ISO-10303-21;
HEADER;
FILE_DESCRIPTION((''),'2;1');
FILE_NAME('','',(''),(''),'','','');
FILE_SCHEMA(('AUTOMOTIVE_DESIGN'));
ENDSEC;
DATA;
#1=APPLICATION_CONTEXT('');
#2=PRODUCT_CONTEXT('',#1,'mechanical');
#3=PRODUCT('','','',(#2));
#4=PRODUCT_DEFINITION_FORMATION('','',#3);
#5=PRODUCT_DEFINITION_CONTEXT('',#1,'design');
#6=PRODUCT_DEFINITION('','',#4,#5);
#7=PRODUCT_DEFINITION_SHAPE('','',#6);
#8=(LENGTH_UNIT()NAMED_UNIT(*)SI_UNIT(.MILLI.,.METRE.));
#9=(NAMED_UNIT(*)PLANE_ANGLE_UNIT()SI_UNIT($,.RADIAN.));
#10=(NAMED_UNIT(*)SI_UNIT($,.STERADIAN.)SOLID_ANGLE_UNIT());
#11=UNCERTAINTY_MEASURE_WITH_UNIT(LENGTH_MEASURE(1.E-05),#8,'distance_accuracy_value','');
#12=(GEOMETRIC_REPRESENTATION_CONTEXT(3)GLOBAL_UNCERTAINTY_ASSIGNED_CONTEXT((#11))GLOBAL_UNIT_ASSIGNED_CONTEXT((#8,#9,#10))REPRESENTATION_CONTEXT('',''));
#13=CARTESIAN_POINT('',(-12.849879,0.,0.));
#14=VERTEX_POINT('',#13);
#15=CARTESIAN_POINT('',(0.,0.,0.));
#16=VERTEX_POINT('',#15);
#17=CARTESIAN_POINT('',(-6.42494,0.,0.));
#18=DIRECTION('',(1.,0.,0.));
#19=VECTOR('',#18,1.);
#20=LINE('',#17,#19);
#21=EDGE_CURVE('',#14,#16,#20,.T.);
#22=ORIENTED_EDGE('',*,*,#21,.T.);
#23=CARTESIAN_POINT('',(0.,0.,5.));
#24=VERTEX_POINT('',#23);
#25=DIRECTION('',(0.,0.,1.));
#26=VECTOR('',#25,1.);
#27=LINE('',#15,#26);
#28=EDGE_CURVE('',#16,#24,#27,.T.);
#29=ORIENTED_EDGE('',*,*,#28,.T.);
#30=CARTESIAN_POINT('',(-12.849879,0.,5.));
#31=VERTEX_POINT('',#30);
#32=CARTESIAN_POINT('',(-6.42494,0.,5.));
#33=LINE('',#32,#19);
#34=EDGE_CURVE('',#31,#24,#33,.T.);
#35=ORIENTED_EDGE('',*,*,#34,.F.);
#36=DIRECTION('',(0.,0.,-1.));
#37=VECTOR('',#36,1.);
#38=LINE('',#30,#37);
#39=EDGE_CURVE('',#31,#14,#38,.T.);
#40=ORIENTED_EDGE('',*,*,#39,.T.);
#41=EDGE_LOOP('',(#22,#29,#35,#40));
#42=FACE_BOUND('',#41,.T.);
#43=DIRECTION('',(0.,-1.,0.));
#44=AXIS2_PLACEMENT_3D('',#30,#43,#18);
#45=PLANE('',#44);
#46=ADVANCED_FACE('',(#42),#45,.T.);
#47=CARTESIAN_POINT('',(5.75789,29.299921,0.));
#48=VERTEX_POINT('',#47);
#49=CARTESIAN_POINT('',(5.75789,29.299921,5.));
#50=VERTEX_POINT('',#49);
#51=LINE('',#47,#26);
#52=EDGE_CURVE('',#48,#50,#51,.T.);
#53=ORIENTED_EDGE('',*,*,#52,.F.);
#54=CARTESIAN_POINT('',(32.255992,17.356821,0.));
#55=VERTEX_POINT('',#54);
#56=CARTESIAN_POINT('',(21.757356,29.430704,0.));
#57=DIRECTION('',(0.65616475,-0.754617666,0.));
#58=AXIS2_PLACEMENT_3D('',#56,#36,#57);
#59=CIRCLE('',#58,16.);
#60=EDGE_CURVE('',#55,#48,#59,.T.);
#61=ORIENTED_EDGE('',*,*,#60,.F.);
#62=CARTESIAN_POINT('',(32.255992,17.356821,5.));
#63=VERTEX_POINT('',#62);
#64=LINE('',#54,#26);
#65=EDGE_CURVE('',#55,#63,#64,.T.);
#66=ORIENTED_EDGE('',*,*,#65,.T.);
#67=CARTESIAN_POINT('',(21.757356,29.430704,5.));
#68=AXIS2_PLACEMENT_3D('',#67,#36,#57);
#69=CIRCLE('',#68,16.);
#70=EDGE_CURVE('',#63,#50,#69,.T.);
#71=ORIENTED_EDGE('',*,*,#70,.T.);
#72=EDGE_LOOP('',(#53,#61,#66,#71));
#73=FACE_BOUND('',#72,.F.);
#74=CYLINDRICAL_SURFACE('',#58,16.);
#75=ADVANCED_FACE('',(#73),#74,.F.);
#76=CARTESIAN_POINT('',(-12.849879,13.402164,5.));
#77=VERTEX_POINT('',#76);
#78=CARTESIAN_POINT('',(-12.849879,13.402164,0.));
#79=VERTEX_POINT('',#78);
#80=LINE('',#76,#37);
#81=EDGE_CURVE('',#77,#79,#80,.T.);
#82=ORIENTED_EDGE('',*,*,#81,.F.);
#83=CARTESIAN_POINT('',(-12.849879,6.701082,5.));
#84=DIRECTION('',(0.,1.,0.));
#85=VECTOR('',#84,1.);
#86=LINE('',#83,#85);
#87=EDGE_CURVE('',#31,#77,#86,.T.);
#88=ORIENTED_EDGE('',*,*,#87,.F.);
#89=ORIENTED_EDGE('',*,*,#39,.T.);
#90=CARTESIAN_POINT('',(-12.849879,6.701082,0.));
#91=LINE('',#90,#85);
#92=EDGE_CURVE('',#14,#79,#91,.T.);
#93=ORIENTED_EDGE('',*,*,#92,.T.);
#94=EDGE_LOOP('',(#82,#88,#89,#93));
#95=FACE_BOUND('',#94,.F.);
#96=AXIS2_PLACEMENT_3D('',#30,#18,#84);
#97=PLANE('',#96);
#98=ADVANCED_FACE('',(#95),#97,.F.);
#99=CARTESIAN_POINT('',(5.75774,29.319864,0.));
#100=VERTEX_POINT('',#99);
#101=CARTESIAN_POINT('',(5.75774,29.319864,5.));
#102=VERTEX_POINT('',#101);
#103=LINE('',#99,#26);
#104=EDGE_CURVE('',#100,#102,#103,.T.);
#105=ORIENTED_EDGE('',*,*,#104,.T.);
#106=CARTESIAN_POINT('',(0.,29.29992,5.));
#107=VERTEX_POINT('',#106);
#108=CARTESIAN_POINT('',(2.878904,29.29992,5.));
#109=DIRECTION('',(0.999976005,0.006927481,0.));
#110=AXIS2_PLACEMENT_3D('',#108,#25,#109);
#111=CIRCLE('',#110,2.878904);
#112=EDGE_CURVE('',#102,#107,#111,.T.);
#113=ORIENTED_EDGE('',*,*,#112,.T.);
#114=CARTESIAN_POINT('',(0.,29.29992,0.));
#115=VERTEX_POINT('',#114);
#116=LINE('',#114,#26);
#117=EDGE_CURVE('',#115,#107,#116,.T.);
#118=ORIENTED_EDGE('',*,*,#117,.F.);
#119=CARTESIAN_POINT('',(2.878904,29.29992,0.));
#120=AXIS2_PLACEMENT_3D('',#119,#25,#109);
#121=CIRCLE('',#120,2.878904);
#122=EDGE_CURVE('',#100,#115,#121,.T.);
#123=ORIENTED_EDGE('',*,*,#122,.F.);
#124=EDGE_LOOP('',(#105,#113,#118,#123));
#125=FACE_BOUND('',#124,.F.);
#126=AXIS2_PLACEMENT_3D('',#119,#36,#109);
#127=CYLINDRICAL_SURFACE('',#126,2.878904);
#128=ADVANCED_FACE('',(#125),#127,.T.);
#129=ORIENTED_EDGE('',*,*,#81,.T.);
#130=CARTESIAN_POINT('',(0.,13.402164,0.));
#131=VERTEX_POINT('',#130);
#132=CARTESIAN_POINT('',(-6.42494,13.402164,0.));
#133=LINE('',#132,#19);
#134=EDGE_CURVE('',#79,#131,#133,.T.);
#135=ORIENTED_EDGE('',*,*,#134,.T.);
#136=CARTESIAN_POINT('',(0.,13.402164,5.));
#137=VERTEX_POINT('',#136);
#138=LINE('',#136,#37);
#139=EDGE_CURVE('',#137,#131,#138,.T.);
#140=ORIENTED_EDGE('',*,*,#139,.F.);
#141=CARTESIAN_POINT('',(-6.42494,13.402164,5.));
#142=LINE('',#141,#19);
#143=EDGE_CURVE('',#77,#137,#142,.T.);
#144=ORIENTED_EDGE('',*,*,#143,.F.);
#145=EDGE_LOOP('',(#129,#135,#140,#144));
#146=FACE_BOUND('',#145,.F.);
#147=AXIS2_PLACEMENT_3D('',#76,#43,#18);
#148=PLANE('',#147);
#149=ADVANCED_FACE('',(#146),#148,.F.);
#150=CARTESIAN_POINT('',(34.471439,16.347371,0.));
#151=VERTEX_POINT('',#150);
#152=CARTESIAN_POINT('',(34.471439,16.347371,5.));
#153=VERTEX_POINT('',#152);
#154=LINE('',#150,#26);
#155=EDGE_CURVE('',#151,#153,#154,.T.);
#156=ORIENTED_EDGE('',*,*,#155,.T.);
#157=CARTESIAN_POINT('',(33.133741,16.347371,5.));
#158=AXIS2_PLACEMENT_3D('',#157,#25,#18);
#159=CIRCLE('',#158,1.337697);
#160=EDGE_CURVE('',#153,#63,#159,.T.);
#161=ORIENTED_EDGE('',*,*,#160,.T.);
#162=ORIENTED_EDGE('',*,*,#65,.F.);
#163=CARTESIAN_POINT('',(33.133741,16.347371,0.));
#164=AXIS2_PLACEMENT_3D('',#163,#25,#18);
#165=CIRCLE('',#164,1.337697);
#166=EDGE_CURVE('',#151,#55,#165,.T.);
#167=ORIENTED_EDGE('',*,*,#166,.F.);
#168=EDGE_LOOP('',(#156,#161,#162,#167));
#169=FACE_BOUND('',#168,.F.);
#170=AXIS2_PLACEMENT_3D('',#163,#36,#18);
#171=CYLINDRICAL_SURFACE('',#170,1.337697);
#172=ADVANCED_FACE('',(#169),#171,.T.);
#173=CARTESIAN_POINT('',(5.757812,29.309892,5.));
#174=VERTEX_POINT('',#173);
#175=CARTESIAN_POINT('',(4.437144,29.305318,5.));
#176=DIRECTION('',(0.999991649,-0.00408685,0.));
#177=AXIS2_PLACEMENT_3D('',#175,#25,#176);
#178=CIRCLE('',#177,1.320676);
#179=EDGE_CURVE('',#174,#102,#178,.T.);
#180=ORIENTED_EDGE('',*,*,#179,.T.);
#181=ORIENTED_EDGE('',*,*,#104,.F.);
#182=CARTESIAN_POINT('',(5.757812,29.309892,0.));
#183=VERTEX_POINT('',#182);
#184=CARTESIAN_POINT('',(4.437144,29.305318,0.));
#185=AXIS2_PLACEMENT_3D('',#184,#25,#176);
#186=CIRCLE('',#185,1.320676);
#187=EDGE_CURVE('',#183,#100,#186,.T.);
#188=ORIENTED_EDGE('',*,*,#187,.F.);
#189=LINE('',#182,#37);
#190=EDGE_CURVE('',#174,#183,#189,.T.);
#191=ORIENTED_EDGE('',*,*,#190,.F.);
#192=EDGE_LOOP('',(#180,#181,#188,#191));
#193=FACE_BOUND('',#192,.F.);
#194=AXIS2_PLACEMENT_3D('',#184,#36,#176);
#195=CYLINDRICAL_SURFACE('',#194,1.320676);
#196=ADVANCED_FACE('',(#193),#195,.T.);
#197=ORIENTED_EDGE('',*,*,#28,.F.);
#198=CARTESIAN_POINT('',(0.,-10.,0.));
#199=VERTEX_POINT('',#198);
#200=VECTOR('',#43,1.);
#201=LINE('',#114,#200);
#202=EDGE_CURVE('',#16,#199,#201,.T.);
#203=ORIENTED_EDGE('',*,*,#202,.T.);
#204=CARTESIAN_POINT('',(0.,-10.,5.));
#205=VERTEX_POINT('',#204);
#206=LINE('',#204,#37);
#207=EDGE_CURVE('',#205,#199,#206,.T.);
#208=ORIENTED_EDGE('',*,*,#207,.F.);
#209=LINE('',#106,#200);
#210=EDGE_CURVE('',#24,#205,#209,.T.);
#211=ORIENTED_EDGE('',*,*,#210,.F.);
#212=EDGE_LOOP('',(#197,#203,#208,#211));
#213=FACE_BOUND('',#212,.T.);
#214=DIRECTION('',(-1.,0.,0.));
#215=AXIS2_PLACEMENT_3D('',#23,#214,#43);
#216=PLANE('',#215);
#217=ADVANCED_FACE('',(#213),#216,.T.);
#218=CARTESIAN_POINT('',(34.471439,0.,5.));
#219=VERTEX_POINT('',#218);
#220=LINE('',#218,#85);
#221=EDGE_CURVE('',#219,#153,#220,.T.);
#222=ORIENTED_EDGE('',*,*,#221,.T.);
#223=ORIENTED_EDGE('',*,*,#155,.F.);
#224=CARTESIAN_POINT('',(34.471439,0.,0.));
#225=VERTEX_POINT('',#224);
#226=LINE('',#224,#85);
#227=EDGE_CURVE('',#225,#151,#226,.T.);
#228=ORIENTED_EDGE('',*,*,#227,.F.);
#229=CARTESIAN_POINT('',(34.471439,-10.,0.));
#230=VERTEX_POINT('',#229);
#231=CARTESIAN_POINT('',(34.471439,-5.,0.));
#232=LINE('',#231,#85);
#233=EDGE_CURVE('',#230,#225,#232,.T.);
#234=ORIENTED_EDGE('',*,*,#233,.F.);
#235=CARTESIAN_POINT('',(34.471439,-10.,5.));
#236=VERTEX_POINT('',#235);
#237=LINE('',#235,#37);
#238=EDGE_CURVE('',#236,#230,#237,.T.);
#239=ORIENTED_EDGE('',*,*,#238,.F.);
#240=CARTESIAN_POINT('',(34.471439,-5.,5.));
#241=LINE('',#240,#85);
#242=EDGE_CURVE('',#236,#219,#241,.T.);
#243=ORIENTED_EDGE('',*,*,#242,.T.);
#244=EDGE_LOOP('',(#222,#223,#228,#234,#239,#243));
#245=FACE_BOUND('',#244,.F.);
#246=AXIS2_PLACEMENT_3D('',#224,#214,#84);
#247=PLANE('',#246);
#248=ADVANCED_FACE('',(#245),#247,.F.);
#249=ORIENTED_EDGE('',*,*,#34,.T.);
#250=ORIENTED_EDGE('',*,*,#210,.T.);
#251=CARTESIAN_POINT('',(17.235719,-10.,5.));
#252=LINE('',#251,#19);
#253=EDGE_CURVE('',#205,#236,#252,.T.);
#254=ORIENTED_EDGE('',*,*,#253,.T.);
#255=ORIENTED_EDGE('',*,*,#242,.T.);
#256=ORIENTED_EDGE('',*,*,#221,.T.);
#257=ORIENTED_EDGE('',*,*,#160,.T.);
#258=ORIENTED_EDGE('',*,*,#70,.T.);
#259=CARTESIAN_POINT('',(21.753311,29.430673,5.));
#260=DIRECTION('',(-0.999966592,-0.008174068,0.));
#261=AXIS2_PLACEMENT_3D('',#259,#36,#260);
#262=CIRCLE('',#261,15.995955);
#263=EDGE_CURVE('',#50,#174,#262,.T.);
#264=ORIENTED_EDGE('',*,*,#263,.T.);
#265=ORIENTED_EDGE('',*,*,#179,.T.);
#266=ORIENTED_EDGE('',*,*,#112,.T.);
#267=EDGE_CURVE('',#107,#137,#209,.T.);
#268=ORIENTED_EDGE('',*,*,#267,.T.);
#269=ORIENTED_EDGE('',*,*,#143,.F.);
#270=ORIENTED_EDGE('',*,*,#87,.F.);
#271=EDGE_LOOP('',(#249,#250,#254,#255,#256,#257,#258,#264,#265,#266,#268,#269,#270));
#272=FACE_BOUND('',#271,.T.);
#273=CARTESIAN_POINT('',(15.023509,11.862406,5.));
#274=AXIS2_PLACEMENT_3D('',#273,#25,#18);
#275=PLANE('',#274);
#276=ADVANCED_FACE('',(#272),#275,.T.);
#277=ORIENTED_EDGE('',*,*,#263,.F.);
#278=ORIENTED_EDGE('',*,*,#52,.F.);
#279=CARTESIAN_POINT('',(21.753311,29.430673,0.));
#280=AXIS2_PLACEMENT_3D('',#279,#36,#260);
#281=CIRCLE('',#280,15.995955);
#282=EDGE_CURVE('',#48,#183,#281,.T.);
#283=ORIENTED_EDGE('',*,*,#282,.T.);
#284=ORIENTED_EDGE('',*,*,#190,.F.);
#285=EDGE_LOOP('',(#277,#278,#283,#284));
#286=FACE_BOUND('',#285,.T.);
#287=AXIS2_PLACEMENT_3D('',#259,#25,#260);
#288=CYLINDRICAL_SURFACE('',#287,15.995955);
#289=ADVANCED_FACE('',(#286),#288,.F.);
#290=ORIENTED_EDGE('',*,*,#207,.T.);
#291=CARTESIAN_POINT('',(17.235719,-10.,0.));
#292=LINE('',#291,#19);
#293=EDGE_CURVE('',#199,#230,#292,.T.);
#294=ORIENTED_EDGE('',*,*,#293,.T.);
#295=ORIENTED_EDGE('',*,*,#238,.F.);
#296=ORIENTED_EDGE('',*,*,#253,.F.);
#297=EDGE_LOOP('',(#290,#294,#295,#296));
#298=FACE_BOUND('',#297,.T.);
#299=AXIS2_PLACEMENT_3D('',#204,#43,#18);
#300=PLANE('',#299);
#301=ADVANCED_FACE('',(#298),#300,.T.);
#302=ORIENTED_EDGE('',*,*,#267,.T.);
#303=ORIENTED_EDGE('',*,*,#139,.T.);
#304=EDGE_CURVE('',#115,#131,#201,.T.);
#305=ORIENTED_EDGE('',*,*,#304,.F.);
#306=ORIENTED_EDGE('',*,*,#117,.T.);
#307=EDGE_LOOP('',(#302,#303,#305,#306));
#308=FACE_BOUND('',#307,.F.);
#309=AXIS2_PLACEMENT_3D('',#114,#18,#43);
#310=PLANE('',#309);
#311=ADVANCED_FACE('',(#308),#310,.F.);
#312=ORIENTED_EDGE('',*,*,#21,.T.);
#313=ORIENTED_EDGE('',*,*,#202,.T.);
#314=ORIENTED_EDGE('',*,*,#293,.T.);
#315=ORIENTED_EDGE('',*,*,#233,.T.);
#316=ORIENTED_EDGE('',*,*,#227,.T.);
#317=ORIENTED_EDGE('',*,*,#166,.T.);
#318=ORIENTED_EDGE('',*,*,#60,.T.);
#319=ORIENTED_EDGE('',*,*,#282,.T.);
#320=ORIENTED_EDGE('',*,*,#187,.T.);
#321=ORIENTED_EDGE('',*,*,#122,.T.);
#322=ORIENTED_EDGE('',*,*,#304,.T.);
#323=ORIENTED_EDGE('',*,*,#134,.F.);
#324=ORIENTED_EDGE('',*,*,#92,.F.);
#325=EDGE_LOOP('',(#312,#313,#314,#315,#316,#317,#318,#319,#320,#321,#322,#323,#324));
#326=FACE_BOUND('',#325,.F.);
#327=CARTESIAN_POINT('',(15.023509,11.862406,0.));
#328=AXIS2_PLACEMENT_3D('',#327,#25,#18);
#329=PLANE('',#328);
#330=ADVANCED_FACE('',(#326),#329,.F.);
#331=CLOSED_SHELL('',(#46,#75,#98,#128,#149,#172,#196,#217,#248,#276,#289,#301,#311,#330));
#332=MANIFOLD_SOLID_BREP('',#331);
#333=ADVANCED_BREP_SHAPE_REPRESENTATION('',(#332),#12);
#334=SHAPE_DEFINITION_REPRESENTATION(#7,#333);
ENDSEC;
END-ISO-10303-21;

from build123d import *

# Parameters (mm, degrees)
F1_DEPTH = 5
F2_W     = 34.4714387385
F2_H     = 10
F2_W_2   = 12.8498794511
F2_H_2   = 13.4021639824
F3_DEPTH = 5


# Not quite as in the source:
# - ends of sketch curves that miss each other by under 0.0002 mm in the source are joined
# - a feature names something its author has since deleted; it is built from what else it names


with BuildPart() as f1:
    # F0 (on Top) → F1 (new body)
    with BuildSketch(Plane.XY):
        with BuildLine():
            Line((0, 29.2999204248), (0, 0))
            Line((0, 0), (34.4714387385, 0))
            Line((34.4714387385, 0), (34.4714387385, 16.3473710418))
            ThreePointArc((34.4714387385, 16.3473710418), (32.5790927131, 15.1300794804), (32.2559916738, 17.3568210333))
            ThreePointArc((32.2559916738, 17.3568210333), (15.182844974, 14.8438668457), (5.7578901922, 29.2999210911))
            ThreePointArc((5.7578901922, 29.2999210911), (2.8789043427, 26.4210160822), (0, 29.2999204248))
        make_face()
        with BuildLine():
            ThreePointArc((5.7577396052, 29.3198639813), (2.8689325046, 32.1788074974), (0, 29.2999204248))
            ThreePointArc((0, 29.2999204248), (2.8789043427, 26.4210160822), (5.7578086853, 29.2999204248))
            ThreePointArc((5.7578086853, 29.2999204248), (5.7578117914, 29.3098925127), (5.7577396052, 29.3198639813))
        make_face()
        with BuildLine():
            ThreePointArc((32.2559916738, 17.3568210333), (32.5790927131, 15.1300794804), (34.4714387385, 16.3473710418))
            ThreePointArc((34.4714387385, 16.3473710418), (33.6883902233, 17.5646626032), (32.2559916738, 17.3568210333))
        make_face()
    extrude(amount=F1_DEPTH)

    # F2 (on face) → F3 (join)
    with BuildSketch(Plane.XY.offset(5)):
        with BuildLine():
            Line((0, 0), (34.4714387385, 0))
            Line((34.4714387385, 0), (34.4714387385, 16.3473710418))
            ThreePointArc((34.4714387385, 16.3473710418), (33.6883902233, 17.5646626032), (32.2559916738, 17.3568210333))
            ThreePointArc((32.2559916738, 17.3568210333), (15.182844974, 14.8438668457), (5.7578901922, 29.2999210911))
            ThreePointArc((5.7578901922, 29.2999210911), (5.757811792, 29.3098923335), (5.7577396052, 29.3198639813))
            ThreePointArc((5.7577396052, 29.3198639813), (2.8689325046, 32.1788074974), (0, 29.2999204248))
            Line((0, 29.2999204248), (0, 25.4882741719))
            Line((0, 25.4882741719), (0, 13.4021639824))
            Line((0, 13.4021639824), (0, 0))
        make_face()
        with Locations((17.2357193692, -5)):
            Rectangle(F2_W, F2_H)
        with Locations((-6.4249397255, 6.7010819912)):
            Rectangle(F2_W_2, F2_H_2)
    extrude(amount=-F3_DEPTH)


solid = f1.part
